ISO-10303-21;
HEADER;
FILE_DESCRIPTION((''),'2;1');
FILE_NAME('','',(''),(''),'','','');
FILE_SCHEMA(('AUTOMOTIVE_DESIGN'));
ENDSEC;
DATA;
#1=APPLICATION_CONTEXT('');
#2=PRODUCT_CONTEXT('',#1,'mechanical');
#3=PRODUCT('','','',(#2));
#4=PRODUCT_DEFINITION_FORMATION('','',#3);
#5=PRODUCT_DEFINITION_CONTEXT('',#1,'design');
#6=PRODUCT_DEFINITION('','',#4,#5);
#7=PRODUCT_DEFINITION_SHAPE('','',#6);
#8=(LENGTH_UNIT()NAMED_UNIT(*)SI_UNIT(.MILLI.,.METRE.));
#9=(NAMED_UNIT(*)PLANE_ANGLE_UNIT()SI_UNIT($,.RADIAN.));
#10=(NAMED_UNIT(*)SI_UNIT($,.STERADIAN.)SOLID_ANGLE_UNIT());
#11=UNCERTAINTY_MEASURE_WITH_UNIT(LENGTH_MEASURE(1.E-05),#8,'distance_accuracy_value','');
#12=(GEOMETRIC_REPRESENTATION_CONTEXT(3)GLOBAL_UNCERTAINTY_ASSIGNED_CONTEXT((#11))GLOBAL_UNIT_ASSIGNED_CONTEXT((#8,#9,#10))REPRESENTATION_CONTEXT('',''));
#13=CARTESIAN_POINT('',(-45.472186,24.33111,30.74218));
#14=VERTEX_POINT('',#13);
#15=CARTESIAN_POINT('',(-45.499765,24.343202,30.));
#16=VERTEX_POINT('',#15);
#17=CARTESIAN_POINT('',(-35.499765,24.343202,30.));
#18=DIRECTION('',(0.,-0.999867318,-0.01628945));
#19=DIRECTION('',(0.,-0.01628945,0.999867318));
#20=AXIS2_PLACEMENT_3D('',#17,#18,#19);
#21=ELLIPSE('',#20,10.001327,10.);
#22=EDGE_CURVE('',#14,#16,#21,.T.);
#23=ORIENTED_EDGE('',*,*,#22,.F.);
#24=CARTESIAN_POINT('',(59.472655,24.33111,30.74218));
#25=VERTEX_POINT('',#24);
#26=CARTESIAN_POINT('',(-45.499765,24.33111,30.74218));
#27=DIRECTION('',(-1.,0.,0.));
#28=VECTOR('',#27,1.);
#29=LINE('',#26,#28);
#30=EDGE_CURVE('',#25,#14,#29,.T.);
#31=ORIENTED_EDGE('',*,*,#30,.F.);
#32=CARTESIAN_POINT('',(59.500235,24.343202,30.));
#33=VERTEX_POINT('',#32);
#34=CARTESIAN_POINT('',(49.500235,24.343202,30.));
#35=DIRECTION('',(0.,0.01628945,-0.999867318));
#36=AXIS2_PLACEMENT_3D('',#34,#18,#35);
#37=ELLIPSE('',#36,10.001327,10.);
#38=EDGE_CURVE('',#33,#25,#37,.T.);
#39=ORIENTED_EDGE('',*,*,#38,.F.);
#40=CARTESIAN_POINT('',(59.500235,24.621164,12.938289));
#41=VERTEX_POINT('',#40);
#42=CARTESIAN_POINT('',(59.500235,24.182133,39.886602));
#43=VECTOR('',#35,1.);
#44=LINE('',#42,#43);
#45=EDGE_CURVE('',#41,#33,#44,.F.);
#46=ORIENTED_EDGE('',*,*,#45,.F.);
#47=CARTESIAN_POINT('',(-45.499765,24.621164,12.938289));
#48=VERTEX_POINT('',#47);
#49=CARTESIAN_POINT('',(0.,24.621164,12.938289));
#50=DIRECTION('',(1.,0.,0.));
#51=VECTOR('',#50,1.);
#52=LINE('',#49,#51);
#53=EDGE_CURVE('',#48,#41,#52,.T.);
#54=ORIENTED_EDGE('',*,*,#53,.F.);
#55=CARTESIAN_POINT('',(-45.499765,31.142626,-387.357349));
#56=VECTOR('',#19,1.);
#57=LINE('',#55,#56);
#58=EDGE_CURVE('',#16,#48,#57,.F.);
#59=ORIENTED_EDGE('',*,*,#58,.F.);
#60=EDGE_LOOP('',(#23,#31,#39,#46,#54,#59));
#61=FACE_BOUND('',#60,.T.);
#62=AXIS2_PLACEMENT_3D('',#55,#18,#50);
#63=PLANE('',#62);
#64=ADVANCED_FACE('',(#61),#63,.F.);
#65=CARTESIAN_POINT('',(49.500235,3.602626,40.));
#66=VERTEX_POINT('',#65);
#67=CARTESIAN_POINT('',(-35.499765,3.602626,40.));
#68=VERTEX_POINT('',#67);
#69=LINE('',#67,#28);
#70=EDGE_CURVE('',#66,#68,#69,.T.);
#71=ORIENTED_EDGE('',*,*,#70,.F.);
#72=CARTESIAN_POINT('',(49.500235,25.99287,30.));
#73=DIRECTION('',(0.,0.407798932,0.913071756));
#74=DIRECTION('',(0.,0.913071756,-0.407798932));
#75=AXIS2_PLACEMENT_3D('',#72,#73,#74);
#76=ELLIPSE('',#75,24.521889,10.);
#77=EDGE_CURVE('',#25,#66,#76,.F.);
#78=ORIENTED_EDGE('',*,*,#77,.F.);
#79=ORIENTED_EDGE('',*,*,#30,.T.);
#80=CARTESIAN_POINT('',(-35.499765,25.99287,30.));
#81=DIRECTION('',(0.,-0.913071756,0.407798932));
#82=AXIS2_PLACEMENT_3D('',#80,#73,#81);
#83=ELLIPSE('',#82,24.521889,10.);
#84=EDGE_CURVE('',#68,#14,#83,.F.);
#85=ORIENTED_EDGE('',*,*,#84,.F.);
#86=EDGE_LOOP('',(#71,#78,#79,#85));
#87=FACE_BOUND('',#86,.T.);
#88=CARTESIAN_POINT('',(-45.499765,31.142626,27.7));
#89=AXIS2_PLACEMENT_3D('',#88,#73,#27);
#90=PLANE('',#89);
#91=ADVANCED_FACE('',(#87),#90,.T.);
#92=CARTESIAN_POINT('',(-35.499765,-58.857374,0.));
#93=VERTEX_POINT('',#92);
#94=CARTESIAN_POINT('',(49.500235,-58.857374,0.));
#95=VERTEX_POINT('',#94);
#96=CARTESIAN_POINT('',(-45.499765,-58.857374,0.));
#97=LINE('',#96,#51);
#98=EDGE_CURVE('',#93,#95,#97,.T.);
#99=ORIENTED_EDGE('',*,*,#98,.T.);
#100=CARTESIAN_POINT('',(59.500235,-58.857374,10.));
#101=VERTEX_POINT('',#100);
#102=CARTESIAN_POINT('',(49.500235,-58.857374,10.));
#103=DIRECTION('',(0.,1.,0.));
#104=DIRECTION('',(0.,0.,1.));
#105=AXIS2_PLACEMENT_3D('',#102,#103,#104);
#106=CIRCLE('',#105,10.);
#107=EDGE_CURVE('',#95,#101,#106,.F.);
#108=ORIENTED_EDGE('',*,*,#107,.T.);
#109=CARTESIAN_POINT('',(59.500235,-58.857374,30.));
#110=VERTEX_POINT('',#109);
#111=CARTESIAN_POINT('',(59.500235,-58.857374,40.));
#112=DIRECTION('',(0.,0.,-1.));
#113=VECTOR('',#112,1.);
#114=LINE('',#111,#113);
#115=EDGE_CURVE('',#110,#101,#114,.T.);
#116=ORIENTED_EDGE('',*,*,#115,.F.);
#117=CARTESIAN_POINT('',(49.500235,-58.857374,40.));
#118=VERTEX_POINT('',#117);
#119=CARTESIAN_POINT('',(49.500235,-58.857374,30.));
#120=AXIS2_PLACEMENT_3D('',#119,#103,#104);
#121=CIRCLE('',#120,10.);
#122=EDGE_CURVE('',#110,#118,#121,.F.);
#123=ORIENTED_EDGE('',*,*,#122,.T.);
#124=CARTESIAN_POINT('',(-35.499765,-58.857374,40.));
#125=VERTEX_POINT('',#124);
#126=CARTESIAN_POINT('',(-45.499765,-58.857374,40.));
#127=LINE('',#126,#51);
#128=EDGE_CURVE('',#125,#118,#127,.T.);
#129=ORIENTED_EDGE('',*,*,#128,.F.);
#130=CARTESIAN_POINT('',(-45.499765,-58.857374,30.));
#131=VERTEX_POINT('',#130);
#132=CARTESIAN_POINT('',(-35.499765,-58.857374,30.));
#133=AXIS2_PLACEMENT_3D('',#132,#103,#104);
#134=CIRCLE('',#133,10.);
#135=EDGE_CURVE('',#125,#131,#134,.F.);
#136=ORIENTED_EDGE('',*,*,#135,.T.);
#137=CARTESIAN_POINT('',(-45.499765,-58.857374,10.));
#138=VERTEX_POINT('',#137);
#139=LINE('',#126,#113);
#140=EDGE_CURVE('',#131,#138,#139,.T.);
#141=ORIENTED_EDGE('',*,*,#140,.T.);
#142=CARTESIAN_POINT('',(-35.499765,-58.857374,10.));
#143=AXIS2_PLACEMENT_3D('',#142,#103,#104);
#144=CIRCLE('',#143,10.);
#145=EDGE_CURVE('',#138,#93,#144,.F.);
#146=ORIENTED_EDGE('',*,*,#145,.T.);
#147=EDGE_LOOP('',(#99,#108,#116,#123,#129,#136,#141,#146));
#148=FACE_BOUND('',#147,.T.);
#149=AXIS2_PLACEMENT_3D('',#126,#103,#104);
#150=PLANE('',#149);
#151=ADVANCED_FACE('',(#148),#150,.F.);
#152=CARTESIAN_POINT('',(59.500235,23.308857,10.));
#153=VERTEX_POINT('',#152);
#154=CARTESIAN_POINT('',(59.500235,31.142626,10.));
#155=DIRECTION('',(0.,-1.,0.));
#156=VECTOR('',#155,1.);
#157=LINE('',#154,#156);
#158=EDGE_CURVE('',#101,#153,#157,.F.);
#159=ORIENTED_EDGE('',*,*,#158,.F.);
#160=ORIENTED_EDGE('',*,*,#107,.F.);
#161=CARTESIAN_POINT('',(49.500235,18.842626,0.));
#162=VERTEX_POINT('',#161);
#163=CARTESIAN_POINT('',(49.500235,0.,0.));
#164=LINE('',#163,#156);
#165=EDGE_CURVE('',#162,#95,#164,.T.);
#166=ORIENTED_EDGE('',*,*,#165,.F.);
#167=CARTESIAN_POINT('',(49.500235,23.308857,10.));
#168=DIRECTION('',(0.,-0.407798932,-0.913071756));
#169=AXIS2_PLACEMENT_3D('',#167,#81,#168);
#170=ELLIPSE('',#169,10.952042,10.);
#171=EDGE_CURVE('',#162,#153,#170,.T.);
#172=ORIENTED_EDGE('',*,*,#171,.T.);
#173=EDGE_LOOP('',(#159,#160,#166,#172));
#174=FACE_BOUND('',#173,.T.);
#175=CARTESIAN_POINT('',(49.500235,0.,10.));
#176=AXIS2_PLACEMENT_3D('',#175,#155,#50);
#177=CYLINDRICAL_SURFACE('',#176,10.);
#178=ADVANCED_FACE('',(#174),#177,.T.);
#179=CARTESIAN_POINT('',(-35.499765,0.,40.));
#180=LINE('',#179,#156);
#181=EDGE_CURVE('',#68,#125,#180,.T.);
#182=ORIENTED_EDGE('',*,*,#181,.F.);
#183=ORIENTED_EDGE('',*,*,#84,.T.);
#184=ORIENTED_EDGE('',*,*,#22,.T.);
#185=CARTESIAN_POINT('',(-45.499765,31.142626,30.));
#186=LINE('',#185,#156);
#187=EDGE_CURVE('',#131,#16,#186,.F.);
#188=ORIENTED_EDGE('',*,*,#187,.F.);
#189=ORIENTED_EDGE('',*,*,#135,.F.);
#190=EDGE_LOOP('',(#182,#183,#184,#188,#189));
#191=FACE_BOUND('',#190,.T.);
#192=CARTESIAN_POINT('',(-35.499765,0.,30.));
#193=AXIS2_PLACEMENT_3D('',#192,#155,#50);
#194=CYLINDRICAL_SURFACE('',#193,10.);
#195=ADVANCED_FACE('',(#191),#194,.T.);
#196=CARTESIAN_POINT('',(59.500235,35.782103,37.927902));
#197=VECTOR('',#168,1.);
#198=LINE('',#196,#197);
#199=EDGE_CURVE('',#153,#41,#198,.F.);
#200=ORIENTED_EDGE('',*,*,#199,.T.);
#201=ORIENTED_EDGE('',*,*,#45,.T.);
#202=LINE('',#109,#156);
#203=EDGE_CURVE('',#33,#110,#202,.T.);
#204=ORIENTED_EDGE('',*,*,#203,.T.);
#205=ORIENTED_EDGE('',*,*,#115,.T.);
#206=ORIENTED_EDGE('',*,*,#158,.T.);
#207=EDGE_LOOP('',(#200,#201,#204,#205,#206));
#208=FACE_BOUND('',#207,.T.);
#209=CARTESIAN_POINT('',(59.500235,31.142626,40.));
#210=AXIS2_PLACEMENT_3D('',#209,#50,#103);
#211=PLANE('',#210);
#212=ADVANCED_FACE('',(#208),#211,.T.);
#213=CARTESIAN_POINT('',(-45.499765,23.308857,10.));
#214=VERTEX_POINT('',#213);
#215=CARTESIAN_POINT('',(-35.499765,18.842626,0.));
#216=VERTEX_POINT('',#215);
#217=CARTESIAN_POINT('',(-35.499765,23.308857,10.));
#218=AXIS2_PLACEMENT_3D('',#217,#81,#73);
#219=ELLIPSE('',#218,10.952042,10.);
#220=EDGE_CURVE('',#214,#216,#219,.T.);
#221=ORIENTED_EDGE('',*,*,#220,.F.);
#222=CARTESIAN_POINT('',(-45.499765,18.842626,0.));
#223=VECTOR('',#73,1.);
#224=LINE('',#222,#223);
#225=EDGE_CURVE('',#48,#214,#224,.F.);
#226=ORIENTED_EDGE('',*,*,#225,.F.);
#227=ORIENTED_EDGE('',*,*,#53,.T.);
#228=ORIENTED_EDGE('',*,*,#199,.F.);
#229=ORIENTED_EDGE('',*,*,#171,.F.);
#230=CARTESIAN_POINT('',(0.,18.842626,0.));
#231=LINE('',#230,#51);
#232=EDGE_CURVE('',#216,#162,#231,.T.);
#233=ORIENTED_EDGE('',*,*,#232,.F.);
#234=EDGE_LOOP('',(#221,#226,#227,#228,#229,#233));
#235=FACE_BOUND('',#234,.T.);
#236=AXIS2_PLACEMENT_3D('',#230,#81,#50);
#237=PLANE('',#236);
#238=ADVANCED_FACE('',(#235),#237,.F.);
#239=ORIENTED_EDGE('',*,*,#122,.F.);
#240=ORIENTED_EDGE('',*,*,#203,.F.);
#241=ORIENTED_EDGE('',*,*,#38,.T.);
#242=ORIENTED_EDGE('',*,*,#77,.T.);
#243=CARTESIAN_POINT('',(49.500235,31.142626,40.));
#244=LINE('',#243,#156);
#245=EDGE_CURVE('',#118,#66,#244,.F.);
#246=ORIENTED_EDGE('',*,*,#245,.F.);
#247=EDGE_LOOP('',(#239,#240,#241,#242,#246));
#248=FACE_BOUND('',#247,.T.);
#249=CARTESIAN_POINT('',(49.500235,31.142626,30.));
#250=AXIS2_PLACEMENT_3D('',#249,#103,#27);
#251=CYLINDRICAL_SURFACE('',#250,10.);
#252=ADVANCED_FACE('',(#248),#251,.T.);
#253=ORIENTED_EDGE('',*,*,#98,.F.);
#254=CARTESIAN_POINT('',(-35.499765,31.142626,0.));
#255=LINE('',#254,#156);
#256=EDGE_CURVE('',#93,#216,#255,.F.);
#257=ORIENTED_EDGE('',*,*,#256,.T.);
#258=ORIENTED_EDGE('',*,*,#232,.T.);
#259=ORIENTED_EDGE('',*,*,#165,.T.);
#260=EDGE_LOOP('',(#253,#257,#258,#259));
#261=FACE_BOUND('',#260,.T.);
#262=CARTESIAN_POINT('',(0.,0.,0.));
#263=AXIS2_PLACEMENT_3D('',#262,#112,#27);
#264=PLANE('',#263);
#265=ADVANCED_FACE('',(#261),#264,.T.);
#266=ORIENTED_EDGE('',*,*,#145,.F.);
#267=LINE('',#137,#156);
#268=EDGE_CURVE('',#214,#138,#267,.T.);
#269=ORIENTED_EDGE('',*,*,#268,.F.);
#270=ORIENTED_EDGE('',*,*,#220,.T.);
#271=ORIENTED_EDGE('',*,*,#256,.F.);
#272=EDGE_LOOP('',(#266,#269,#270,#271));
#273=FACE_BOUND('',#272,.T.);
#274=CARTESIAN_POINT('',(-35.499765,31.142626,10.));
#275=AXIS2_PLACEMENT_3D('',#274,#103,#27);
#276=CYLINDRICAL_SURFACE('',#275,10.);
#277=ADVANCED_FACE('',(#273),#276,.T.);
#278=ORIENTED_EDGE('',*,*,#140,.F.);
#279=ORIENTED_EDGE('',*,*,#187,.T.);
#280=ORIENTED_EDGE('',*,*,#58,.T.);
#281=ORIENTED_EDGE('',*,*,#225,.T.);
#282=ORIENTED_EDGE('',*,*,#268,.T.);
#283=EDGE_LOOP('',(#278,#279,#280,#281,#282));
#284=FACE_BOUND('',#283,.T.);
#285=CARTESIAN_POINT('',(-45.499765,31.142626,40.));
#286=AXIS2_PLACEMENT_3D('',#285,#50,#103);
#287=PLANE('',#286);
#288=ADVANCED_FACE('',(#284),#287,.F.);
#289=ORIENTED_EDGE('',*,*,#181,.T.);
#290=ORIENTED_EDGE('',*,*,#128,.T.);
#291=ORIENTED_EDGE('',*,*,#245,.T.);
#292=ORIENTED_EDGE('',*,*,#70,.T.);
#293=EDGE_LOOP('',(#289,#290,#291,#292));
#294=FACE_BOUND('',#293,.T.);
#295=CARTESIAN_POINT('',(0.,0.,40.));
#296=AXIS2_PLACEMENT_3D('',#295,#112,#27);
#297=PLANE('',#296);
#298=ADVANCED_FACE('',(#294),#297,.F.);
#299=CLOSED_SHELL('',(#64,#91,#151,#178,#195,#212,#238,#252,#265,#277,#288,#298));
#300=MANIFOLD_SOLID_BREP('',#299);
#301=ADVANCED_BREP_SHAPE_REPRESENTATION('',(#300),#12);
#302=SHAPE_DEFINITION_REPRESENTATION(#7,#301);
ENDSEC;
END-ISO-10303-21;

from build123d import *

# Parameters (mm, degrees)
SKETCH1_W           = 105
SKETCH1_H           = 90
BOSS_EXTRUDE1_DEPTH = 40
FILLET5_R           = 10.000000066
FILLET6_R           = 10.000000066
FILLET7_R           = 10.000000066
FILLET8_R           = 10.000000066
CHAMFER14_SIZE      = 27.54
CHAMFER14_SIZE_2    = 12.3
CHAMFER15_SIZE      = 415.05734945
CHAMFER15_SIZE_2    = 7.46


with BuildPart() as part:
    # Sketch1 → Boss-Extrude1 (new body)
    with BuildSketch(Plane.XY):
        with Locations((7.000234735, -13.857374392)):
            Rectangle(SKETCH1_W, SKETCH1_H)
    extrude(amount=BOSS_EXTRUDE1_DEPTH)

    # Fillet5
    fillet5_edges = [part.edges().sort_by_distance(p)[0] for p in [
        (59.500234735, -13.857374392, 40),
    ]]
    fillet(fillet5_edges, radius=FILLET5_R)

    # Fillet6
    fillet6_edges = [part.edges().sort_by_distance(p)[0] for p in [
        (-45.499765265, -13.857374392, 40),
    ]]
    fillet(fillet6_edges, radius=FILLET6_R)

    # Fillet7
    fillet7_edges = [part.edges().sort_by_distance(p)[0] for p in [
        (59.500234735, -13.857374392, 0),
    ]]
    fillet(fillet7_edges, radius=FILLET7_R)

    # Fillet8
    fillet8_edges = [part.edges().sort_by_distance(p)[0] for p in [
        (-45.499765265, -13.857374392, 0),
    ]]
    fillet(fillet8_edges, radius=FILLET8_R)

    # Chamfer14
    # the kernel refuses this chamfer: 27.54, 12.3 mm, written as the material it takes off along each edge
    with BuildSketch(Plane(origin=(-106.873201315, 31.142625608, 0), x_dir=(0, 0.015735241575877565, 0.99987619342224), z_dir=(1, 0, 0))) as chamfer14_piece_1:
        Polygon((CHAMFER14_SIZE * 0.999876193422, CHAMFER14_SIZE * 0.0157352415759), (-CHAMFER14_SIZE_2 * 0.0157352415759, CHAMFER14_SIZE_2 * 0.999876193422), (0, 0), align=None)
    extrude(amount=227.7468721, mode=Mode.SUBTRACT)
    with BuildSketch(Plane(origin=(-106.873201315, 31.142625608, 40), x_dir=(0, 0.07864976650804911, -0.9969023092701859), z_dir=(1, 0, 0))) as chamfer14_piece_2:
        Polygon((CHAMFER14_SIZE_2 * 0.99690230927, -CHAMFER14_SIZE_2 * 0.078649766508), (-CHAMFER14_SIZE * 0.078649766508, -CHAMFER14_SIZE * 0.99690230927), (0, 0), align=None)
    extrude(amount=227.7468721, mode=Mode.SUBTRACT)

    # Chamfer15
    # the kernel refuses this chamfer: 415.05734945, 7.46 mm, written as the material it takes off along each edge
    with BuildSketch(Plane(origin=(-1124.643578574, 31.142625608, 27.7), x_dir=(0, 0.0006265203958835344, -0.9999998037360776), z_dir=(1, 0, 0))) as chamfer15_piece_1:
        Polygon((CHAMFER15_SIZE * 0.999999803737, -CHAMFER15_SIZE * 0.000626520395884), (-CHAMFER15_SIZE_2 * 0.408370910279, -CHAMFER15_SIZE_2 * 0.912816082044), (0, 0), align=None)
    extrude(amount=2263.287626617, mode=Mode.SUBTRACT)


solid = part.part
